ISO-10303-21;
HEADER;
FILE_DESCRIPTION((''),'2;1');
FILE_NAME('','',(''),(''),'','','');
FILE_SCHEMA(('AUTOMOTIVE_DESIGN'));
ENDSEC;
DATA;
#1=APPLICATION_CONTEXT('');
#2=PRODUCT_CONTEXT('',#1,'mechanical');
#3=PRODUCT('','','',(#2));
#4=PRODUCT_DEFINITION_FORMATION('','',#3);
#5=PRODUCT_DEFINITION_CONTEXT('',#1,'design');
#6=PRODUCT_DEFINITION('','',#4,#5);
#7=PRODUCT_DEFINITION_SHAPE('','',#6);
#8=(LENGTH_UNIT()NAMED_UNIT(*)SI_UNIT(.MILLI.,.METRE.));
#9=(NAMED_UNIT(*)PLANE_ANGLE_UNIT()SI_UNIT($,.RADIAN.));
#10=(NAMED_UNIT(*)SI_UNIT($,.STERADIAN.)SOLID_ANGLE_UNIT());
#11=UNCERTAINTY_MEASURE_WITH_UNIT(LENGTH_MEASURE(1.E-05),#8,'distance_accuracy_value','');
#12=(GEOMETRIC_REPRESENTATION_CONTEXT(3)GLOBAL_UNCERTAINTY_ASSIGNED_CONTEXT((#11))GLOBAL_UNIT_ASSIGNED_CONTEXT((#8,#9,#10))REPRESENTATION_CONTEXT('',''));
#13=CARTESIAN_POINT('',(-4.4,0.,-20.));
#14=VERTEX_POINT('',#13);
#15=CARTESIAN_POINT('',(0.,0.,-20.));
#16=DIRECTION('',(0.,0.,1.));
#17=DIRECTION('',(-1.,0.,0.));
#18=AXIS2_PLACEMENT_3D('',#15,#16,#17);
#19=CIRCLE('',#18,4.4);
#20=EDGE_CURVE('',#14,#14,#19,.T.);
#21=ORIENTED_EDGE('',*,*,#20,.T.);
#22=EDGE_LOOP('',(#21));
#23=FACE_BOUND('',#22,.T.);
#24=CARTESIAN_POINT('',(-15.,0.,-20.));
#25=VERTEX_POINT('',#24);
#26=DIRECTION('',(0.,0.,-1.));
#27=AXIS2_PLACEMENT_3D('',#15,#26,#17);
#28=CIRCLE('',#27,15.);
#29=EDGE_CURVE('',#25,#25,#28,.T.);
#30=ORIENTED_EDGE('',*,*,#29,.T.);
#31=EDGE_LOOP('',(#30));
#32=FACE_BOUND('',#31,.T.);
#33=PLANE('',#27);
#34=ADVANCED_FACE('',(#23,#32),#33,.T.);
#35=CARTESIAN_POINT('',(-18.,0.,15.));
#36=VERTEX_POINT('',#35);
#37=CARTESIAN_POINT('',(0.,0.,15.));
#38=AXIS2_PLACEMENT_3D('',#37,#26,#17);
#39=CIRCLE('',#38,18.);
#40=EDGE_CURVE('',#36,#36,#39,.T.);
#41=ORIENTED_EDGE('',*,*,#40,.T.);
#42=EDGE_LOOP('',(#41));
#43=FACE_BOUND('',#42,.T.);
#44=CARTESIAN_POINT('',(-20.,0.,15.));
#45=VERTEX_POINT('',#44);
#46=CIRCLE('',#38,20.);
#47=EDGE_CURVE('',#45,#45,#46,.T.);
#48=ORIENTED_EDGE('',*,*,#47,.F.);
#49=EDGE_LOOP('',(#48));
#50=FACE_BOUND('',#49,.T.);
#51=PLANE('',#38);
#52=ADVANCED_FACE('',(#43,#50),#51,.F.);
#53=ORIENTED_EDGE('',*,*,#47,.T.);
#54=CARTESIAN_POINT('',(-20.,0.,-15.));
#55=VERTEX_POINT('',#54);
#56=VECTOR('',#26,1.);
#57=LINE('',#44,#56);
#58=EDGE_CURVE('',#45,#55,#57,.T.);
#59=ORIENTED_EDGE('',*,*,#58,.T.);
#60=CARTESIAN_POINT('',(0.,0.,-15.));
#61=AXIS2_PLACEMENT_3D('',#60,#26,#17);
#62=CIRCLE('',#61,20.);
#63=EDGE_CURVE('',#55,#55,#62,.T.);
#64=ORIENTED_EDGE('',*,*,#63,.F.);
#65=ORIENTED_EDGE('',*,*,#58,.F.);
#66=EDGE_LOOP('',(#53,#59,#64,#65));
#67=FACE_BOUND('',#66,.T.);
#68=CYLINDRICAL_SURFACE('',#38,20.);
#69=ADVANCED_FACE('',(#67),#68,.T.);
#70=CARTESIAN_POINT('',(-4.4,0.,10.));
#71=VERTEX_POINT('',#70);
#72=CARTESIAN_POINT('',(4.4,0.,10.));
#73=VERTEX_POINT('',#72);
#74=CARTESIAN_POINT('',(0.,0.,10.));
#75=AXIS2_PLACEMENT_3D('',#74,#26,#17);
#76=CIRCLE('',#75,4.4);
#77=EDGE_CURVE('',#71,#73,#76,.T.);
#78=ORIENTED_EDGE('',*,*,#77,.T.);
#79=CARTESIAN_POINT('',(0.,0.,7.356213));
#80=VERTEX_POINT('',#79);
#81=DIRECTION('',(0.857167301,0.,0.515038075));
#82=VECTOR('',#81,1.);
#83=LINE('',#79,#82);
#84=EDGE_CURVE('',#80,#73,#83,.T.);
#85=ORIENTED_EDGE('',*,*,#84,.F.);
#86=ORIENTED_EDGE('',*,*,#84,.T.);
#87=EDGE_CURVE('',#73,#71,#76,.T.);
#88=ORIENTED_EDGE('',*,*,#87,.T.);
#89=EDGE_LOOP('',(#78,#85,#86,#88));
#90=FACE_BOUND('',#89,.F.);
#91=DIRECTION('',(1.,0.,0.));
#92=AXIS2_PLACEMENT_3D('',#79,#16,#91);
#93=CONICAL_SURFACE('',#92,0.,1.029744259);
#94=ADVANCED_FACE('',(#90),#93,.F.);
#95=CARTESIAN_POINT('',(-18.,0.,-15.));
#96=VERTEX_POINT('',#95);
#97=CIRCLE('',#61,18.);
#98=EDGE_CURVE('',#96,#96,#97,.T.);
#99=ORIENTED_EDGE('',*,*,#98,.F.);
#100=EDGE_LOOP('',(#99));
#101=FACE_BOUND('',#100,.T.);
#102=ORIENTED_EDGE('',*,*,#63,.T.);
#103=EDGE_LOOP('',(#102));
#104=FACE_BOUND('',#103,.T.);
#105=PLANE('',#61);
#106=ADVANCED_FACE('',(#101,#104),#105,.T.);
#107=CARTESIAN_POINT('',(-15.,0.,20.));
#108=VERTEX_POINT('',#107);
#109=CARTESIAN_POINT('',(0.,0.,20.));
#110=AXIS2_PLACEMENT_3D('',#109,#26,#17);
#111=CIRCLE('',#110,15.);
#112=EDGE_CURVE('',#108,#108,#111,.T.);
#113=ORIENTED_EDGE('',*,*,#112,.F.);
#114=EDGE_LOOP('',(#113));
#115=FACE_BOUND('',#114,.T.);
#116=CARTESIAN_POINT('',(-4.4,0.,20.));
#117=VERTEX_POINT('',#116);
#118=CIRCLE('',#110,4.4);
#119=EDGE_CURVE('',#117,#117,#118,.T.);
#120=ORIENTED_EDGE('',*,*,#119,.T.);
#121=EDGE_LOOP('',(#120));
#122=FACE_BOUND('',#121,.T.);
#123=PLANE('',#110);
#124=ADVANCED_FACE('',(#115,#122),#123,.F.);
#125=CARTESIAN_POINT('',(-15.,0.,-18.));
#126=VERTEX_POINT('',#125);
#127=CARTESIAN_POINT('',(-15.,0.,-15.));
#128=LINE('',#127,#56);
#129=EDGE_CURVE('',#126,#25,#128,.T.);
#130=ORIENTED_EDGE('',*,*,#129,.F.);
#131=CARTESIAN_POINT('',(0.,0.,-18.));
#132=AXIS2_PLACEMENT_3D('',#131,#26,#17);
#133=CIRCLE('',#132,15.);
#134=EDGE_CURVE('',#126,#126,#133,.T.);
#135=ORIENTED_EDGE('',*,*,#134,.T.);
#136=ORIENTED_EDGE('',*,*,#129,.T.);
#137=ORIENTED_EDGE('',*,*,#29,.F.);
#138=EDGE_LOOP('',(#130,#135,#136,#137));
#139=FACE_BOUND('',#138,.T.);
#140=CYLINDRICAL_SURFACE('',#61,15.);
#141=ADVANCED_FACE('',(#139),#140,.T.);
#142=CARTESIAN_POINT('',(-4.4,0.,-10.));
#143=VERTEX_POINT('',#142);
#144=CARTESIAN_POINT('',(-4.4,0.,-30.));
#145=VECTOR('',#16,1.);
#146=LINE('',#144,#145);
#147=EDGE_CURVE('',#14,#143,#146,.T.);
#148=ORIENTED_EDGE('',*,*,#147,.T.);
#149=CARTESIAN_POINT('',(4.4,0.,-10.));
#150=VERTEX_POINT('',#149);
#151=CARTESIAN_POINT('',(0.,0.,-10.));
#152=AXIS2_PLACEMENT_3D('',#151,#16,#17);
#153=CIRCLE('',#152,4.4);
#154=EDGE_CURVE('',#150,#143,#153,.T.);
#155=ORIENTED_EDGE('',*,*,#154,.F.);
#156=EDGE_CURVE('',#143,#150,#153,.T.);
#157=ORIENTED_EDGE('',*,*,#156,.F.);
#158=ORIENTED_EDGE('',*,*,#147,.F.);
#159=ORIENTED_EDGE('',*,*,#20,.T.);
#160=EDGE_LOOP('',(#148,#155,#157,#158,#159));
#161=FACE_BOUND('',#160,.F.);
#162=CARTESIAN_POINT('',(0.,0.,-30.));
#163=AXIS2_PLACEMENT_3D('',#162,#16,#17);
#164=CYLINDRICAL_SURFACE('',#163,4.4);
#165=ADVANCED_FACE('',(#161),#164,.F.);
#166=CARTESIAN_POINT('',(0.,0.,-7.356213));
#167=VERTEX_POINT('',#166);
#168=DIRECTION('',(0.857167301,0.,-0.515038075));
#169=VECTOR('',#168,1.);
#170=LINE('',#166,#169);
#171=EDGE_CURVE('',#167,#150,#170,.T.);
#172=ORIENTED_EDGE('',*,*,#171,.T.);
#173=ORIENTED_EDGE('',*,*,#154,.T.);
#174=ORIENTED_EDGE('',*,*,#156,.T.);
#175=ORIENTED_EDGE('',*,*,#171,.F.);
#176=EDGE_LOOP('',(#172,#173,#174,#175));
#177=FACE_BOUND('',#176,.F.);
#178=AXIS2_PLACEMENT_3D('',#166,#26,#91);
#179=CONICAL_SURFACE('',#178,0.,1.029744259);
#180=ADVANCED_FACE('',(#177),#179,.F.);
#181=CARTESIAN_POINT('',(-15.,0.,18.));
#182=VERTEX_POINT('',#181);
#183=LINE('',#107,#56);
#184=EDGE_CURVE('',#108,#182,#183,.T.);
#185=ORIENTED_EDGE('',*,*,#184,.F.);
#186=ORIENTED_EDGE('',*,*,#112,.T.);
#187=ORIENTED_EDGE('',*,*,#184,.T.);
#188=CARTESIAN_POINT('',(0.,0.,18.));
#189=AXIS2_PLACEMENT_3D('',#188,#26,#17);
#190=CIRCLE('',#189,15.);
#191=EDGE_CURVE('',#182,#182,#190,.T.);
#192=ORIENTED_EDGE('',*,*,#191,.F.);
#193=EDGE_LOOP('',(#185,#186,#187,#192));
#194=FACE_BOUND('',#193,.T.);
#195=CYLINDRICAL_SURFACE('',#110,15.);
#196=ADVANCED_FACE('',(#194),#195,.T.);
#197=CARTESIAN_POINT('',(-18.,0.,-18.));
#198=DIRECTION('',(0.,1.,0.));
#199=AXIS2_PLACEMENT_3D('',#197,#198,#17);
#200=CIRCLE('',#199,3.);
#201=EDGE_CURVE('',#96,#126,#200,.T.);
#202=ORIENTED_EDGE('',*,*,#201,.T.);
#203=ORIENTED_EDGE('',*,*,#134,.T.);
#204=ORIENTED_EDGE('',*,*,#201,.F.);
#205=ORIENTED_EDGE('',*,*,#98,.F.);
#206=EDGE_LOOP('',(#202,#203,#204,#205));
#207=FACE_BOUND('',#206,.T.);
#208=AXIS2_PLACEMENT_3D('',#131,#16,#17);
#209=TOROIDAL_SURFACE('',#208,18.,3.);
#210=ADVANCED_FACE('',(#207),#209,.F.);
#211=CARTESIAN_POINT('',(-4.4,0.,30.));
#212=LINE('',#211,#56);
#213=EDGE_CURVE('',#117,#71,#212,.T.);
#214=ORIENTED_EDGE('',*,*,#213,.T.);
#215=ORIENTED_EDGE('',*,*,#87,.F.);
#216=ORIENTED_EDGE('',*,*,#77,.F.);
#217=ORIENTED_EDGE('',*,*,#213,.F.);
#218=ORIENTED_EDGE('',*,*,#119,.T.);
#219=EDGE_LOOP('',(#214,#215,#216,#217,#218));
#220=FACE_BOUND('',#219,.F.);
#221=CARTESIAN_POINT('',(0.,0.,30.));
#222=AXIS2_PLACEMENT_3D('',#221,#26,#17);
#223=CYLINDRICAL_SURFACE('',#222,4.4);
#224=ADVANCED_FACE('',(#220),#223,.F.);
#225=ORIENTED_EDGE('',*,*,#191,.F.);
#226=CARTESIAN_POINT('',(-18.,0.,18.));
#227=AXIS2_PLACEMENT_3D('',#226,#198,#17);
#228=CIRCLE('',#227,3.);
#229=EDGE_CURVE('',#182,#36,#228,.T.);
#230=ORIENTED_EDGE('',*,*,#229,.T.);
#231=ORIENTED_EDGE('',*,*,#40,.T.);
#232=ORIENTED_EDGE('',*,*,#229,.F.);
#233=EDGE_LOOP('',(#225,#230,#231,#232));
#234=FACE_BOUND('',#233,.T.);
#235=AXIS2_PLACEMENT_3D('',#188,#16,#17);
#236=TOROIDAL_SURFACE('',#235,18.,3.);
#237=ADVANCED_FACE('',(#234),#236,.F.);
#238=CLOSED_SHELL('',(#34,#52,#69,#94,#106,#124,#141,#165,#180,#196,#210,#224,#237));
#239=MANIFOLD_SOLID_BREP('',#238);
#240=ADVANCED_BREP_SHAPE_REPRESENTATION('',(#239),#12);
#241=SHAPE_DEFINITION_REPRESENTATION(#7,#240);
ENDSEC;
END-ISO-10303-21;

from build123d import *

# Parameters (mm, degrees)
F2_R           = 3
F5_D           = 8.8
F5_DEPTH       = 10
F5_TIP         = 2.6437867237
F5_ON_F3_D     = 8.8
F5_ON_F3_DEPTH = 10
F5_ON_F3_TIP   = 2.6437867237


with BuildPart() as f1:
    # F0 (on Front) → F1 (revolve)
    with BuildSketch(Plane.XZ):
        Polygon((0, -20), (0, 20), (-15, 20), (-15, 15), (-20, 15), (-20, -15), (-15, -15), (-15, -20), align=None)
    revolve(axis=Axis((0, 0, 0), (0, 0, -1)))

    # F2
    f2_edges = [f1.edges().sort_by_distance(p)[0] for p in [
        (15, 0, 15),
        (15, 0, -15),
    ]]
    fillet(f2_edges, radius=F2_R)

    # F5
    with Locations(Plane(origin=(0, 0, -20), x_dir=(1, 0, 0), z_dir=(0, 0, -1))):
        with Locations((0, 0)):
            Hole(F5_D / 2, depth=F5_DEPTH)
            with Locations((0, 0, -(F5_DEPTH + F5_TIP / 2))):  # 118° drill point
                Cone(0, F5_D / 2, F5_TIP, mode=Mode.SUBTRACT)

    # F5 on F3
    with Locations(Plane.XY.offset(20)):
        with Locations((0, 0)):
            Hole(F5_ON_F3_D / 2, depth=F5_ON_F3_DEPTH)
            with Locations((0, 0, -(F5_ON_F3_DEPTH + F5_ON_F3_TIP / 2))):  # 118° drill point
                Cone(0, F5_ON_F3_D / 2, F5_ON_F3_TIP, mode=Mode.SUBTRACT)


solid = f1.part
